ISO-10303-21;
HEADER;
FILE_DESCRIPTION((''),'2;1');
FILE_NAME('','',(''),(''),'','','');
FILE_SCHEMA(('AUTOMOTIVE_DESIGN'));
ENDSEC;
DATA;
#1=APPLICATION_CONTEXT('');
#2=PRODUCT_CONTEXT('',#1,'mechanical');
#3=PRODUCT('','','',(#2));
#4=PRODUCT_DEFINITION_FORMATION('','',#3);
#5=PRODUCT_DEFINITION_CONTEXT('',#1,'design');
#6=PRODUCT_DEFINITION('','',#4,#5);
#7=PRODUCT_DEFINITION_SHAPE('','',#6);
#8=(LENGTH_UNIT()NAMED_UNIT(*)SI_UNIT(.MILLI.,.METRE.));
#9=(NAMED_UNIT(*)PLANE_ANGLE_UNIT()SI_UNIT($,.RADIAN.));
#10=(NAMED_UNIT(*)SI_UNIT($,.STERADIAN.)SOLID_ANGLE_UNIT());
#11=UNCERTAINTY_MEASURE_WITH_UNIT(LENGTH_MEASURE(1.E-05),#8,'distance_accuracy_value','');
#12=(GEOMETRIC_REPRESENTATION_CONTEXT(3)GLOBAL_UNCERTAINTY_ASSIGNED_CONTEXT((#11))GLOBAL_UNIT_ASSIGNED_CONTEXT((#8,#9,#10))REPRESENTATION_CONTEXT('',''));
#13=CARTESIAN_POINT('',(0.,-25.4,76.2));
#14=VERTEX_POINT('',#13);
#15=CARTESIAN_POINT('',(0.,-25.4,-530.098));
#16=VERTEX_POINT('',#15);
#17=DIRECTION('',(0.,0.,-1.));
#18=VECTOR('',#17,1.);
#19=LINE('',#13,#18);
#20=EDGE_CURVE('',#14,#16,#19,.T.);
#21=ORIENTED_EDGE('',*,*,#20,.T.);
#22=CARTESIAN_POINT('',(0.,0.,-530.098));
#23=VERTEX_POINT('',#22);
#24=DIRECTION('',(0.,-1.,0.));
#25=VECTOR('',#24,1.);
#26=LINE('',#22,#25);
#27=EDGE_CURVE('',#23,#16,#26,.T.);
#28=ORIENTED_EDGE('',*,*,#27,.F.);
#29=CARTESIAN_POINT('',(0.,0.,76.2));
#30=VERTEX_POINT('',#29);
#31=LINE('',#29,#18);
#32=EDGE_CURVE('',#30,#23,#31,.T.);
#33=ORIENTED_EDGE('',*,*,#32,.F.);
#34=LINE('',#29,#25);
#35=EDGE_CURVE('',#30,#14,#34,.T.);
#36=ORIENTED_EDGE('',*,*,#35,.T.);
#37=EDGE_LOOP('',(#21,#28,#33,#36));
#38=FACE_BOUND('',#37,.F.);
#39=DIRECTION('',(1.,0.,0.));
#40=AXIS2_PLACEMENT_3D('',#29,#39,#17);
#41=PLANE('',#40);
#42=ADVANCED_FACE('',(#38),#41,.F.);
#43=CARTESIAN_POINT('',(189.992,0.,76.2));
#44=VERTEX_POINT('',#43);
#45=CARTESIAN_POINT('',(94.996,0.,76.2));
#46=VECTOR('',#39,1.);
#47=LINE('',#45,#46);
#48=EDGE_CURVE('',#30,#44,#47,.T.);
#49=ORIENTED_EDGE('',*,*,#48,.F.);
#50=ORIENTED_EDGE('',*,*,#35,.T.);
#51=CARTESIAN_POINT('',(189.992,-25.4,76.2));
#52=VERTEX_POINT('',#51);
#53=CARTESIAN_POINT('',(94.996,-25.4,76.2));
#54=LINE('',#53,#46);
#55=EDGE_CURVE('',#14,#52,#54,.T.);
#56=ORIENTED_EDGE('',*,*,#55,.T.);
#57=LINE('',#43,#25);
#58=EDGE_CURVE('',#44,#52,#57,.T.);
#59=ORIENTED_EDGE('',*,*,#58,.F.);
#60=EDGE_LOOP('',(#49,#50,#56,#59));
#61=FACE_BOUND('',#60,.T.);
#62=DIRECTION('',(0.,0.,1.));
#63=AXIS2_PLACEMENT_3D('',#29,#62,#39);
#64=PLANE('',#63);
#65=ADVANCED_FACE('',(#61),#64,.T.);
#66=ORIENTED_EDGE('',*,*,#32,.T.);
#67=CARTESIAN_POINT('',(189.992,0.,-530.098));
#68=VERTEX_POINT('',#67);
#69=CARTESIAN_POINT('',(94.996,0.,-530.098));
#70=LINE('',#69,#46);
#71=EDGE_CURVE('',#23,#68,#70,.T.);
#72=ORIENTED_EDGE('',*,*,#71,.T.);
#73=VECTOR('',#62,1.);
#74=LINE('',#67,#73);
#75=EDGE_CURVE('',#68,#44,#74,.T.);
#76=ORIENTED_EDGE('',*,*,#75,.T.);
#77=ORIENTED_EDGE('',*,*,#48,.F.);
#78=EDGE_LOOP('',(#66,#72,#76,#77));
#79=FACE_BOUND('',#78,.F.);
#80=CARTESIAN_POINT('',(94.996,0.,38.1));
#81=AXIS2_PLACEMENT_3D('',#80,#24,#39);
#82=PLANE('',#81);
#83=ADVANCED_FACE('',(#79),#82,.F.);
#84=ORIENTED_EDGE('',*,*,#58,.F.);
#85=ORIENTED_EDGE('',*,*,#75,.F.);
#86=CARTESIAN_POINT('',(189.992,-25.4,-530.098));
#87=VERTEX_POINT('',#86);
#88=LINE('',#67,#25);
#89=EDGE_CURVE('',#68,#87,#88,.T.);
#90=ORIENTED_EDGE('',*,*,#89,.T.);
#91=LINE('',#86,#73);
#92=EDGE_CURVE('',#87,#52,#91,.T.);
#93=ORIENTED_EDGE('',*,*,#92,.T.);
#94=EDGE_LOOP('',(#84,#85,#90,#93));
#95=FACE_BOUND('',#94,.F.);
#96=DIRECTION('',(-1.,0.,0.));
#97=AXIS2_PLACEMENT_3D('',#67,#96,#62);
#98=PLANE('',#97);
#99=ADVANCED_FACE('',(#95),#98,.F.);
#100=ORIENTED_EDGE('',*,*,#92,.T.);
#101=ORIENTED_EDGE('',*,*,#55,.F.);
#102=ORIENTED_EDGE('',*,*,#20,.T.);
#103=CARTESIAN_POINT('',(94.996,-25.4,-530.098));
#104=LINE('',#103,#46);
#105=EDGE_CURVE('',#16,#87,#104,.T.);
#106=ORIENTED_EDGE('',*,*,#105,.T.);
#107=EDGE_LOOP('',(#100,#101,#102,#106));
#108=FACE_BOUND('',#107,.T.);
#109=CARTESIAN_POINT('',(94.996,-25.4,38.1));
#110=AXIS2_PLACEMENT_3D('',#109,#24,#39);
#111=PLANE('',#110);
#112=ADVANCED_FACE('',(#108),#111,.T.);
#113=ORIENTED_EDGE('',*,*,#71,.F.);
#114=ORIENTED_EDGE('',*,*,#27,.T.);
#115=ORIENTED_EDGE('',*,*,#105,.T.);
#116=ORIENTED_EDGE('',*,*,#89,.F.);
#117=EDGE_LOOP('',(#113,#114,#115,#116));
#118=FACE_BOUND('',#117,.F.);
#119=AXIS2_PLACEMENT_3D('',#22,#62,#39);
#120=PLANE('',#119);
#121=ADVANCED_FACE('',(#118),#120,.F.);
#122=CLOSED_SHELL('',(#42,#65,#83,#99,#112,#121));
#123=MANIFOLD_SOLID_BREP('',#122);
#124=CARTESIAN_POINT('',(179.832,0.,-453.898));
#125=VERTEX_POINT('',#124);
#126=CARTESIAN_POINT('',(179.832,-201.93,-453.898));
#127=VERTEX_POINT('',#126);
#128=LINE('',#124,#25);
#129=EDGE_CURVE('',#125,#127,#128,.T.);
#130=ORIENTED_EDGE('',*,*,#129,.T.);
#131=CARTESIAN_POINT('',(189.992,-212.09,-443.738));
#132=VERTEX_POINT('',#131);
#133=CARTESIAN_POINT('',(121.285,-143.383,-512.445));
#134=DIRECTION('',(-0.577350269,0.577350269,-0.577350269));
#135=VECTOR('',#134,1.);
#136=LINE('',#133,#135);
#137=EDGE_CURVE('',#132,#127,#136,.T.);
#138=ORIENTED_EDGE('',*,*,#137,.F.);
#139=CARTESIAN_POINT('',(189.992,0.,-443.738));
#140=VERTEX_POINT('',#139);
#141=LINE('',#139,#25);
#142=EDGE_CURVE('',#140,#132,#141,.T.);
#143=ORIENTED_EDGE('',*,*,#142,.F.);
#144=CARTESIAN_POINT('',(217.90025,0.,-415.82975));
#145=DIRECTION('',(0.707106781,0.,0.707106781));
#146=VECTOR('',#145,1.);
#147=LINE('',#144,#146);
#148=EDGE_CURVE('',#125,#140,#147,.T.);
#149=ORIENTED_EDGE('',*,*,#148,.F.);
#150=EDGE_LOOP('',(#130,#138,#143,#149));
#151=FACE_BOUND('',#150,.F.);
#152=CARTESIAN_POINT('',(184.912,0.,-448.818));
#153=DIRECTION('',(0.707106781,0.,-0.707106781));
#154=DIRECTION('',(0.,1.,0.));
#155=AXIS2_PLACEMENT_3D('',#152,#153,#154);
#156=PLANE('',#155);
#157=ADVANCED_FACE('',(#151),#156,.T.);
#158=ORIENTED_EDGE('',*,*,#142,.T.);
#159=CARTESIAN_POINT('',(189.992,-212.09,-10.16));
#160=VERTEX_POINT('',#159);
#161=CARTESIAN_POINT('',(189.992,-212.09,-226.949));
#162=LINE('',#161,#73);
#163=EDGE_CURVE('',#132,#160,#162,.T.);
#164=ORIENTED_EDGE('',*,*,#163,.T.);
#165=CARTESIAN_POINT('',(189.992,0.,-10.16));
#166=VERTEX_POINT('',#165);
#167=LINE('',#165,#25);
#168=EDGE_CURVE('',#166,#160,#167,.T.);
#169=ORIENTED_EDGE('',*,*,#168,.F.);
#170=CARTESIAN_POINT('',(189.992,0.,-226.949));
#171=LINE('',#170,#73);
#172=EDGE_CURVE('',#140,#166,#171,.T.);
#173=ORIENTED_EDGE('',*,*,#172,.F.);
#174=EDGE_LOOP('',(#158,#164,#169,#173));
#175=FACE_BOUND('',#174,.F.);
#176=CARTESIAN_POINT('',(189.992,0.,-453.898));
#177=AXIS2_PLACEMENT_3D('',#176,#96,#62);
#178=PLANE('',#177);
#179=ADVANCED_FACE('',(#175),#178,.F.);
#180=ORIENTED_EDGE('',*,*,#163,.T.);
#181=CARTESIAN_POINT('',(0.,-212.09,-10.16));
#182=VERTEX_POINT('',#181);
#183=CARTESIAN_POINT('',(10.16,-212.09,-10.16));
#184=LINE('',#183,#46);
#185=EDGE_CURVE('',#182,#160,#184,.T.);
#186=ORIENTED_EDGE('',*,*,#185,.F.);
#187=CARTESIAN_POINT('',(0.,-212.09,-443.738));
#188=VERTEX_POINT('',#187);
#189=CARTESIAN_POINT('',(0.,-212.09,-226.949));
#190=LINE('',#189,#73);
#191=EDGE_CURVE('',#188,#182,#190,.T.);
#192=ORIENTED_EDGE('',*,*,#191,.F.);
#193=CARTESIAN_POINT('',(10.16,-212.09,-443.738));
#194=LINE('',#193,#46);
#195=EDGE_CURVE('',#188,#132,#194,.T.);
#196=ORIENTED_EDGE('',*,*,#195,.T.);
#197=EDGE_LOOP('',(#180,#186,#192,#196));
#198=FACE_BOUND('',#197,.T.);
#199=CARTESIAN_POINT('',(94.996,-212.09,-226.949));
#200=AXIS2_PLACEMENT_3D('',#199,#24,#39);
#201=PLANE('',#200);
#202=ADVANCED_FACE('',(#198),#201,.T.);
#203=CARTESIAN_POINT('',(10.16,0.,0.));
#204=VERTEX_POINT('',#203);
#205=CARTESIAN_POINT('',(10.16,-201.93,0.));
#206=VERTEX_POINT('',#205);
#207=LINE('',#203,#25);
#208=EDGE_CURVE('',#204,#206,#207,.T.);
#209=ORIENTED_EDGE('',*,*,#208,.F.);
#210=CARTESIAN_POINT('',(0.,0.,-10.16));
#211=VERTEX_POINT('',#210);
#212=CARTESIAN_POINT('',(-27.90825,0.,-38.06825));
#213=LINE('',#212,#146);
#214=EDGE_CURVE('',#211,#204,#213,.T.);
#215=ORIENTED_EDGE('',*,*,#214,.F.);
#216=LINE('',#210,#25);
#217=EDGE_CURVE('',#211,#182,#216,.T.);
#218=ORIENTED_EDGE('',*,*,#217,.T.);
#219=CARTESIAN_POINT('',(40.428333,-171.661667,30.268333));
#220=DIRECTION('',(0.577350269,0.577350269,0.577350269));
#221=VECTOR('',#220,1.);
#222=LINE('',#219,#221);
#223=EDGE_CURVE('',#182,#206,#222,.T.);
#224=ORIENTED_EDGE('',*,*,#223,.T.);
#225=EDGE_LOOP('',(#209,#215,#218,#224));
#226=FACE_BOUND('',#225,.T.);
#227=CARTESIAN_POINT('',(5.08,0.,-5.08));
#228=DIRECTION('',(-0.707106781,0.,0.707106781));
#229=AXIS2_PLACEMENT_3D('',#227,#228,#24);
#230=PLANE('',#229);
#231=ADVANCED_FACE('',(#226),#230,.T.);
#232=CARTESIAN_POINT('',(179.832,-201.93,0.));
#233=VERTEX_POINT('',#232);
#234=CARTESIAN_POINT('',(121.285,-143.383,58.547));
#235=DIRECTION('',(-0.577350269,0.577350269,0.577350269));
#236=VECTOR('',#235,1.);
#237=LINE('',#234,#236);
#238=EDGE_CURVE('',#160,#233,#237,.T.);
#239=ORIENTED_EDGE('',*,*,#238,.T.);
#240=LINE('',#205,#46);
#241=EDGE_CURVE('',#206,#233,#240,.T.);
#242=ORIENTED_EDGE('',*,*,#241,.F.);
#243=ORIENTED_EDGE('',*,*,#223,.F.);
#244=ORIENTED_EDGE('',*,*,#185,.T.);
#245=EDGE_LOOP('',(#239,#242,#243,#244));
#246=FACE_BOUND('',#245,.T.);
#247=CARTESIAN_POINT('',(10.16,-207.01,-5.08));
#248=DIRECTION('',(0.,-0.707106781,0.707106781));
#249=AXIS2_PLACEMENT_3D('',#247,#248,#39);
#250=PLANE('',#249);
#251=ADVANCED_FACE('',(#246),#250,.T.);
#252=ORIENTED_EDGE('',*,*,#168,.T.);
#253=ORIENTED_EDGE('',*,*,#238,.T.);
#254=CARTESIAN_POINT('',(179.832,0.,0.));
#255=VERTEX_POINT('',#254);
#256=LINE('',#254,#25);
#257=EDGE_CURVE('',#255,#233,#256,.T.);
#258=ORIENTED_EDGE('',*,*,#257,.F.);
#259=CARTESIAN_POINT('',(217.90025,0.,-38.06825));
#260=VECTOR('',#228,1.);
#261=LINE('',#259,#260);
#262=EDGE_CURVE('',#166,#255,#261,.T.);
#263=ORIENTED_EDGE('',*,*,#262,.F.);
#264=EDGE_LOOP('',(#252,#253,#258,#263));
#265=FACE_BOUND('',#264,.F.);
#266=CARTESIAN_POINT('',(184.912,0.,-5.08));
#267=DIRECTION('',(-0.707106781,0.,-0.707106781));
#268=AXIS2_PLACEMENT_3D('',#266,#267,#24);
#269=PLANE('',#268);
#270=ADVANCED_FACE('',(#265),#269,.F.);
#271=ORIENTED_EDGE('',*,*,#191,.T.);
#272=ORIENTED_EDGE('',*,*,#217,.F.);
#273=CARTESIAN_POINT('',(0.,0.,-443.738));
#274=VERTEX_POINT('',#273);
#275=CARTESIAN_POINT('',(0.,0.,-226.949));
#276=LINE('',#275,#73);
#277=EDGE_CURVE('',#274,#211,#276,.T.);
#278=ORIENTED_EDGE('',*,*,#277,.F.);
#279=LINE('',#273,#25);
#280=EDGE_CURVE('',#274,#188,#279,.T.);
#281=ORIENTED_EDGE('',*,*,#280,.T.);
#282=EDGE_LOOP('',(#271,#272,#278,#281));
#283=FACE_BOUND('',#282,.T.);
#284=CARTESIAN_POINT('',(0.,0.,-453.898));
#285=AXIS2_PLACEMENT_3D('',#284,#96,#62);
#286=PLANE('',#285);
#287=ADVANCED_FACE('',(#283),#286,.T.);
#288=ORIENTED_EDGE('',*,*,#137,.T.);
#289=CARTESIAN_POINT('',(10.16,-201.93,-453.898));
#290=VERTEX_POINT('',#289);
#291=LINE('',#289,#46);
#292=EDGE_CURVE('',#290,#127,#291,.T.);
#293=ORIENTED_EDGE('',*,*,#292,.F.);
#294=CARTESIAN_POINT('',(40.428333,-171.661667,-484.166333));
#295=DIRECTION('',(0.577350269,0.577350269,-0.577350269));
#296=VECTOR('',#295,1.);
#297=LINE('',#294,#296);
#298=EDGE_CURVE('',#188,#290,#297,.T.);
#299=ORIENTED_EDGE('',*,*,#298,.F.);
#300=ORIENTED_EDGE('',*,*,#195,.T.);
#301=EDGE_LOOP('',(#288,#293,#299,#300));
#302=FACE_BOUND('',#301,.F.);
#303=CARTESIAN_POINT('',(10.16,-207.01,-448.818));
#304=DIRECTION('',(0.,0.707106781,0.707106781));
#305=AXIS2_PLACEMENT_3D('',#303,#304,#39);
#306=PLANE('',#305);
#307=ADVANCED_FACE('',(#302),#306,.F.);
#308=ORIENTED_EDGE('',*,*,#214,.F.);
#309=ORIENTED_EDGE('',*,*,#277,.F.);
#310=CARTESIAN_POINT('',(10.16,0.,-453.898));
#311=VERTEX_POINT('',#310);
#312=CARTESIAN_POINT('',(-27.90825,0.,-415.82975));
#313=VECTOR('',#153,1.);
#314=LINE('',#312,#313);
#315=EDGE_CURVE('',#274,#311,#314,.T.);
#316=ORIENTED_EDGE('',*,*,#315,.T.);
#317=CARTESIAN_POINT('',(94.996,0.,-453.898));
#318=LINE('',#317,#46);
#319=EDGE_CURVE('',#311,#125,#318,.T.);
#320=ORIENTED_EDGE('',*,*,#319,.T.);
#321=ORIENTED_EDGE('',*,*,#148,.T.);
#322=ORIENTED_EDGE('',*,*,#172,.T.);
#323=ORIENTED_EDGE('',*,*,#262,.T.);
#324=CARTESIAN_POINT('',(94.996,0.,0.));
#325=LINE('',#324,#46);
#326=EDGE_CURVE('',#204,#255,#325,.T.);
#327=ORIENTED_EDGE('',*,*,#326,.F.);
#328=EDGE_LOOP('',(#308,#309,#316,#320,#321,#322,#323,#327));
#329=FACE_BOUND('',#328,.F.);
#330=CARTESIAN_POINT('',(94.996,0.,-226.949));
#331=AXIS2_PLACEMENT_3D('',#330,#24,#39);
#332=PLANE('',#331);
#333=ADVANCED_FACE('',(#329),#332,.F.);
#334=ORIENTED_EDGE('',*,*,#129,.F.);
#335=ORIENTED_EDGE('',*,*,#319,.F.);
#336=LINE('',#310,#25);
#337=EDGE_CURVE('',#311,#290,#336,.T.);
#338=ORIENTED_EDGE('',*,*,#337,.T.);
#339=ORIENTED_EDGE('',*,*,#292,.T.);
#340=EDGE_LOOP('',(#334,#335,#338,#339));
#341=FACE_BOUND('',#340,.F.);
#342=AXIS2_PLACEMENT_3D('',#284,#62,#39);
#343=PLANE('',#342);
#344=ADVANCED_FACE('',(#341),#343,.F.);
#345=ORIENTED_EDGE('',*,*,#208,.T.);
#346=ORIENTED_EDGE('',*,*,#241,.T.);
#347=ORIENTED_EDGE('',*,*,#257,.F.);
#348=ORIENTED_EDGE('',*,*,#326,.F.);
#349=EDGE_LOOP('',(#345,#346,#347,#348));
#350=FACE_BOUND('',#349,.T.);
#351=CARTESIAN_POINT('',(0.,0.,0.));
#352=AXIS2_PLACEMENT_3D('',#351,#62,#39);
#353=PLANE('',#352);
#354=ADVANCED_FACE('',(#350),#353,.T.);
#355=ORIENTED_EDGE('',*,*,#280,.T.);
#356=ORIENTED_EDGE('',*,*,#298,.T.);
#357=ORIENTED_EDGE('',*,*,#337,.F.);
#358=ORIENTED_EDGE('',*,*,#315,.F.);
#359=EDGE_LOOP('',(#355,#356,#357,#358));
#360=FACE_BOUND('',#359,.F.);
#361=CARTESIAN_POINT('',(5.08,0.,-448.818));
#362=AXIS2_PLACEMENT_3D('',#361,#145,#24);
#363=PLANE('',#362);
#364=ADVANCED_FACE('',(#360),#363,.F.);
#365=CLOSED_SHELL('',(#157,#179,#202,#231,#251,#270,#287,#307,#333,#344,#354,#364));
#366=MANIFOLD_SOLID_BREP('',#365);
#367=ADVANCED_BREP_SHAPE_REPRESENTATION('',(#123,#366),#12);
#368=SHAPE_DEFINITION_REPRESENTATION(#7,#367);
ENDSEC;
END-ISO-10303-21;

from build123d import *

# Parameters (mm, degrees)
F0_W     = 189.992
F0_H     = 453.898
F1_DEPTH = 212.09
F2_SIZE  = 10.16
F3_SIZE  = 10.16
F0_H_2   = 76.2
F4_DEPTH = 25.4


with BuildPart() as f1:
    # F0 (on Front) → F1 (new body)
    with BuildSketch(Plane.XZ):
        with Locations((94.996, -226.949)):
            Rectangle(F0_W, F0_H)
    extrude(amount=F1_DEPTH)

    # F2
    f2_edges = [f1.edges().sort_by_distance(p)[0] for p in [
        (0, -106.045, 0),
        (189.992, -106.045, 0),
        (189.992, -106.045, -453.898),
        (0, -106.045, -453.898),
    ]]
    chamfer(f2_edges, length=F2_SIZE)

    # F3
    f3_edges = [f1.edges().sort_by_distance(p)[0] for p in [
        (94.996, -212.09, 0),
        (94.996, -212.09, -453.898),
    ]]
    chamfer(f3_edges, length=F3_SIZE)


with BuildPart() as f4:
    # F0 (on Front) → F4 (new body)
    with BuildSketch(Plane.XZ):
        with Locations((94.996, 38.1)):
            Rectangle(F0_W, F0_H_2)
        with Locations((94.996, -491.998)):
            Rectangle(F0_W, F0_H_2)
        with Locations((94.996, -226.949)):
            Rectangle(F0_W, F0_H)
    extrude(amount=F4_DEPTH)


solid = Compound([f1.part, f4.part])
